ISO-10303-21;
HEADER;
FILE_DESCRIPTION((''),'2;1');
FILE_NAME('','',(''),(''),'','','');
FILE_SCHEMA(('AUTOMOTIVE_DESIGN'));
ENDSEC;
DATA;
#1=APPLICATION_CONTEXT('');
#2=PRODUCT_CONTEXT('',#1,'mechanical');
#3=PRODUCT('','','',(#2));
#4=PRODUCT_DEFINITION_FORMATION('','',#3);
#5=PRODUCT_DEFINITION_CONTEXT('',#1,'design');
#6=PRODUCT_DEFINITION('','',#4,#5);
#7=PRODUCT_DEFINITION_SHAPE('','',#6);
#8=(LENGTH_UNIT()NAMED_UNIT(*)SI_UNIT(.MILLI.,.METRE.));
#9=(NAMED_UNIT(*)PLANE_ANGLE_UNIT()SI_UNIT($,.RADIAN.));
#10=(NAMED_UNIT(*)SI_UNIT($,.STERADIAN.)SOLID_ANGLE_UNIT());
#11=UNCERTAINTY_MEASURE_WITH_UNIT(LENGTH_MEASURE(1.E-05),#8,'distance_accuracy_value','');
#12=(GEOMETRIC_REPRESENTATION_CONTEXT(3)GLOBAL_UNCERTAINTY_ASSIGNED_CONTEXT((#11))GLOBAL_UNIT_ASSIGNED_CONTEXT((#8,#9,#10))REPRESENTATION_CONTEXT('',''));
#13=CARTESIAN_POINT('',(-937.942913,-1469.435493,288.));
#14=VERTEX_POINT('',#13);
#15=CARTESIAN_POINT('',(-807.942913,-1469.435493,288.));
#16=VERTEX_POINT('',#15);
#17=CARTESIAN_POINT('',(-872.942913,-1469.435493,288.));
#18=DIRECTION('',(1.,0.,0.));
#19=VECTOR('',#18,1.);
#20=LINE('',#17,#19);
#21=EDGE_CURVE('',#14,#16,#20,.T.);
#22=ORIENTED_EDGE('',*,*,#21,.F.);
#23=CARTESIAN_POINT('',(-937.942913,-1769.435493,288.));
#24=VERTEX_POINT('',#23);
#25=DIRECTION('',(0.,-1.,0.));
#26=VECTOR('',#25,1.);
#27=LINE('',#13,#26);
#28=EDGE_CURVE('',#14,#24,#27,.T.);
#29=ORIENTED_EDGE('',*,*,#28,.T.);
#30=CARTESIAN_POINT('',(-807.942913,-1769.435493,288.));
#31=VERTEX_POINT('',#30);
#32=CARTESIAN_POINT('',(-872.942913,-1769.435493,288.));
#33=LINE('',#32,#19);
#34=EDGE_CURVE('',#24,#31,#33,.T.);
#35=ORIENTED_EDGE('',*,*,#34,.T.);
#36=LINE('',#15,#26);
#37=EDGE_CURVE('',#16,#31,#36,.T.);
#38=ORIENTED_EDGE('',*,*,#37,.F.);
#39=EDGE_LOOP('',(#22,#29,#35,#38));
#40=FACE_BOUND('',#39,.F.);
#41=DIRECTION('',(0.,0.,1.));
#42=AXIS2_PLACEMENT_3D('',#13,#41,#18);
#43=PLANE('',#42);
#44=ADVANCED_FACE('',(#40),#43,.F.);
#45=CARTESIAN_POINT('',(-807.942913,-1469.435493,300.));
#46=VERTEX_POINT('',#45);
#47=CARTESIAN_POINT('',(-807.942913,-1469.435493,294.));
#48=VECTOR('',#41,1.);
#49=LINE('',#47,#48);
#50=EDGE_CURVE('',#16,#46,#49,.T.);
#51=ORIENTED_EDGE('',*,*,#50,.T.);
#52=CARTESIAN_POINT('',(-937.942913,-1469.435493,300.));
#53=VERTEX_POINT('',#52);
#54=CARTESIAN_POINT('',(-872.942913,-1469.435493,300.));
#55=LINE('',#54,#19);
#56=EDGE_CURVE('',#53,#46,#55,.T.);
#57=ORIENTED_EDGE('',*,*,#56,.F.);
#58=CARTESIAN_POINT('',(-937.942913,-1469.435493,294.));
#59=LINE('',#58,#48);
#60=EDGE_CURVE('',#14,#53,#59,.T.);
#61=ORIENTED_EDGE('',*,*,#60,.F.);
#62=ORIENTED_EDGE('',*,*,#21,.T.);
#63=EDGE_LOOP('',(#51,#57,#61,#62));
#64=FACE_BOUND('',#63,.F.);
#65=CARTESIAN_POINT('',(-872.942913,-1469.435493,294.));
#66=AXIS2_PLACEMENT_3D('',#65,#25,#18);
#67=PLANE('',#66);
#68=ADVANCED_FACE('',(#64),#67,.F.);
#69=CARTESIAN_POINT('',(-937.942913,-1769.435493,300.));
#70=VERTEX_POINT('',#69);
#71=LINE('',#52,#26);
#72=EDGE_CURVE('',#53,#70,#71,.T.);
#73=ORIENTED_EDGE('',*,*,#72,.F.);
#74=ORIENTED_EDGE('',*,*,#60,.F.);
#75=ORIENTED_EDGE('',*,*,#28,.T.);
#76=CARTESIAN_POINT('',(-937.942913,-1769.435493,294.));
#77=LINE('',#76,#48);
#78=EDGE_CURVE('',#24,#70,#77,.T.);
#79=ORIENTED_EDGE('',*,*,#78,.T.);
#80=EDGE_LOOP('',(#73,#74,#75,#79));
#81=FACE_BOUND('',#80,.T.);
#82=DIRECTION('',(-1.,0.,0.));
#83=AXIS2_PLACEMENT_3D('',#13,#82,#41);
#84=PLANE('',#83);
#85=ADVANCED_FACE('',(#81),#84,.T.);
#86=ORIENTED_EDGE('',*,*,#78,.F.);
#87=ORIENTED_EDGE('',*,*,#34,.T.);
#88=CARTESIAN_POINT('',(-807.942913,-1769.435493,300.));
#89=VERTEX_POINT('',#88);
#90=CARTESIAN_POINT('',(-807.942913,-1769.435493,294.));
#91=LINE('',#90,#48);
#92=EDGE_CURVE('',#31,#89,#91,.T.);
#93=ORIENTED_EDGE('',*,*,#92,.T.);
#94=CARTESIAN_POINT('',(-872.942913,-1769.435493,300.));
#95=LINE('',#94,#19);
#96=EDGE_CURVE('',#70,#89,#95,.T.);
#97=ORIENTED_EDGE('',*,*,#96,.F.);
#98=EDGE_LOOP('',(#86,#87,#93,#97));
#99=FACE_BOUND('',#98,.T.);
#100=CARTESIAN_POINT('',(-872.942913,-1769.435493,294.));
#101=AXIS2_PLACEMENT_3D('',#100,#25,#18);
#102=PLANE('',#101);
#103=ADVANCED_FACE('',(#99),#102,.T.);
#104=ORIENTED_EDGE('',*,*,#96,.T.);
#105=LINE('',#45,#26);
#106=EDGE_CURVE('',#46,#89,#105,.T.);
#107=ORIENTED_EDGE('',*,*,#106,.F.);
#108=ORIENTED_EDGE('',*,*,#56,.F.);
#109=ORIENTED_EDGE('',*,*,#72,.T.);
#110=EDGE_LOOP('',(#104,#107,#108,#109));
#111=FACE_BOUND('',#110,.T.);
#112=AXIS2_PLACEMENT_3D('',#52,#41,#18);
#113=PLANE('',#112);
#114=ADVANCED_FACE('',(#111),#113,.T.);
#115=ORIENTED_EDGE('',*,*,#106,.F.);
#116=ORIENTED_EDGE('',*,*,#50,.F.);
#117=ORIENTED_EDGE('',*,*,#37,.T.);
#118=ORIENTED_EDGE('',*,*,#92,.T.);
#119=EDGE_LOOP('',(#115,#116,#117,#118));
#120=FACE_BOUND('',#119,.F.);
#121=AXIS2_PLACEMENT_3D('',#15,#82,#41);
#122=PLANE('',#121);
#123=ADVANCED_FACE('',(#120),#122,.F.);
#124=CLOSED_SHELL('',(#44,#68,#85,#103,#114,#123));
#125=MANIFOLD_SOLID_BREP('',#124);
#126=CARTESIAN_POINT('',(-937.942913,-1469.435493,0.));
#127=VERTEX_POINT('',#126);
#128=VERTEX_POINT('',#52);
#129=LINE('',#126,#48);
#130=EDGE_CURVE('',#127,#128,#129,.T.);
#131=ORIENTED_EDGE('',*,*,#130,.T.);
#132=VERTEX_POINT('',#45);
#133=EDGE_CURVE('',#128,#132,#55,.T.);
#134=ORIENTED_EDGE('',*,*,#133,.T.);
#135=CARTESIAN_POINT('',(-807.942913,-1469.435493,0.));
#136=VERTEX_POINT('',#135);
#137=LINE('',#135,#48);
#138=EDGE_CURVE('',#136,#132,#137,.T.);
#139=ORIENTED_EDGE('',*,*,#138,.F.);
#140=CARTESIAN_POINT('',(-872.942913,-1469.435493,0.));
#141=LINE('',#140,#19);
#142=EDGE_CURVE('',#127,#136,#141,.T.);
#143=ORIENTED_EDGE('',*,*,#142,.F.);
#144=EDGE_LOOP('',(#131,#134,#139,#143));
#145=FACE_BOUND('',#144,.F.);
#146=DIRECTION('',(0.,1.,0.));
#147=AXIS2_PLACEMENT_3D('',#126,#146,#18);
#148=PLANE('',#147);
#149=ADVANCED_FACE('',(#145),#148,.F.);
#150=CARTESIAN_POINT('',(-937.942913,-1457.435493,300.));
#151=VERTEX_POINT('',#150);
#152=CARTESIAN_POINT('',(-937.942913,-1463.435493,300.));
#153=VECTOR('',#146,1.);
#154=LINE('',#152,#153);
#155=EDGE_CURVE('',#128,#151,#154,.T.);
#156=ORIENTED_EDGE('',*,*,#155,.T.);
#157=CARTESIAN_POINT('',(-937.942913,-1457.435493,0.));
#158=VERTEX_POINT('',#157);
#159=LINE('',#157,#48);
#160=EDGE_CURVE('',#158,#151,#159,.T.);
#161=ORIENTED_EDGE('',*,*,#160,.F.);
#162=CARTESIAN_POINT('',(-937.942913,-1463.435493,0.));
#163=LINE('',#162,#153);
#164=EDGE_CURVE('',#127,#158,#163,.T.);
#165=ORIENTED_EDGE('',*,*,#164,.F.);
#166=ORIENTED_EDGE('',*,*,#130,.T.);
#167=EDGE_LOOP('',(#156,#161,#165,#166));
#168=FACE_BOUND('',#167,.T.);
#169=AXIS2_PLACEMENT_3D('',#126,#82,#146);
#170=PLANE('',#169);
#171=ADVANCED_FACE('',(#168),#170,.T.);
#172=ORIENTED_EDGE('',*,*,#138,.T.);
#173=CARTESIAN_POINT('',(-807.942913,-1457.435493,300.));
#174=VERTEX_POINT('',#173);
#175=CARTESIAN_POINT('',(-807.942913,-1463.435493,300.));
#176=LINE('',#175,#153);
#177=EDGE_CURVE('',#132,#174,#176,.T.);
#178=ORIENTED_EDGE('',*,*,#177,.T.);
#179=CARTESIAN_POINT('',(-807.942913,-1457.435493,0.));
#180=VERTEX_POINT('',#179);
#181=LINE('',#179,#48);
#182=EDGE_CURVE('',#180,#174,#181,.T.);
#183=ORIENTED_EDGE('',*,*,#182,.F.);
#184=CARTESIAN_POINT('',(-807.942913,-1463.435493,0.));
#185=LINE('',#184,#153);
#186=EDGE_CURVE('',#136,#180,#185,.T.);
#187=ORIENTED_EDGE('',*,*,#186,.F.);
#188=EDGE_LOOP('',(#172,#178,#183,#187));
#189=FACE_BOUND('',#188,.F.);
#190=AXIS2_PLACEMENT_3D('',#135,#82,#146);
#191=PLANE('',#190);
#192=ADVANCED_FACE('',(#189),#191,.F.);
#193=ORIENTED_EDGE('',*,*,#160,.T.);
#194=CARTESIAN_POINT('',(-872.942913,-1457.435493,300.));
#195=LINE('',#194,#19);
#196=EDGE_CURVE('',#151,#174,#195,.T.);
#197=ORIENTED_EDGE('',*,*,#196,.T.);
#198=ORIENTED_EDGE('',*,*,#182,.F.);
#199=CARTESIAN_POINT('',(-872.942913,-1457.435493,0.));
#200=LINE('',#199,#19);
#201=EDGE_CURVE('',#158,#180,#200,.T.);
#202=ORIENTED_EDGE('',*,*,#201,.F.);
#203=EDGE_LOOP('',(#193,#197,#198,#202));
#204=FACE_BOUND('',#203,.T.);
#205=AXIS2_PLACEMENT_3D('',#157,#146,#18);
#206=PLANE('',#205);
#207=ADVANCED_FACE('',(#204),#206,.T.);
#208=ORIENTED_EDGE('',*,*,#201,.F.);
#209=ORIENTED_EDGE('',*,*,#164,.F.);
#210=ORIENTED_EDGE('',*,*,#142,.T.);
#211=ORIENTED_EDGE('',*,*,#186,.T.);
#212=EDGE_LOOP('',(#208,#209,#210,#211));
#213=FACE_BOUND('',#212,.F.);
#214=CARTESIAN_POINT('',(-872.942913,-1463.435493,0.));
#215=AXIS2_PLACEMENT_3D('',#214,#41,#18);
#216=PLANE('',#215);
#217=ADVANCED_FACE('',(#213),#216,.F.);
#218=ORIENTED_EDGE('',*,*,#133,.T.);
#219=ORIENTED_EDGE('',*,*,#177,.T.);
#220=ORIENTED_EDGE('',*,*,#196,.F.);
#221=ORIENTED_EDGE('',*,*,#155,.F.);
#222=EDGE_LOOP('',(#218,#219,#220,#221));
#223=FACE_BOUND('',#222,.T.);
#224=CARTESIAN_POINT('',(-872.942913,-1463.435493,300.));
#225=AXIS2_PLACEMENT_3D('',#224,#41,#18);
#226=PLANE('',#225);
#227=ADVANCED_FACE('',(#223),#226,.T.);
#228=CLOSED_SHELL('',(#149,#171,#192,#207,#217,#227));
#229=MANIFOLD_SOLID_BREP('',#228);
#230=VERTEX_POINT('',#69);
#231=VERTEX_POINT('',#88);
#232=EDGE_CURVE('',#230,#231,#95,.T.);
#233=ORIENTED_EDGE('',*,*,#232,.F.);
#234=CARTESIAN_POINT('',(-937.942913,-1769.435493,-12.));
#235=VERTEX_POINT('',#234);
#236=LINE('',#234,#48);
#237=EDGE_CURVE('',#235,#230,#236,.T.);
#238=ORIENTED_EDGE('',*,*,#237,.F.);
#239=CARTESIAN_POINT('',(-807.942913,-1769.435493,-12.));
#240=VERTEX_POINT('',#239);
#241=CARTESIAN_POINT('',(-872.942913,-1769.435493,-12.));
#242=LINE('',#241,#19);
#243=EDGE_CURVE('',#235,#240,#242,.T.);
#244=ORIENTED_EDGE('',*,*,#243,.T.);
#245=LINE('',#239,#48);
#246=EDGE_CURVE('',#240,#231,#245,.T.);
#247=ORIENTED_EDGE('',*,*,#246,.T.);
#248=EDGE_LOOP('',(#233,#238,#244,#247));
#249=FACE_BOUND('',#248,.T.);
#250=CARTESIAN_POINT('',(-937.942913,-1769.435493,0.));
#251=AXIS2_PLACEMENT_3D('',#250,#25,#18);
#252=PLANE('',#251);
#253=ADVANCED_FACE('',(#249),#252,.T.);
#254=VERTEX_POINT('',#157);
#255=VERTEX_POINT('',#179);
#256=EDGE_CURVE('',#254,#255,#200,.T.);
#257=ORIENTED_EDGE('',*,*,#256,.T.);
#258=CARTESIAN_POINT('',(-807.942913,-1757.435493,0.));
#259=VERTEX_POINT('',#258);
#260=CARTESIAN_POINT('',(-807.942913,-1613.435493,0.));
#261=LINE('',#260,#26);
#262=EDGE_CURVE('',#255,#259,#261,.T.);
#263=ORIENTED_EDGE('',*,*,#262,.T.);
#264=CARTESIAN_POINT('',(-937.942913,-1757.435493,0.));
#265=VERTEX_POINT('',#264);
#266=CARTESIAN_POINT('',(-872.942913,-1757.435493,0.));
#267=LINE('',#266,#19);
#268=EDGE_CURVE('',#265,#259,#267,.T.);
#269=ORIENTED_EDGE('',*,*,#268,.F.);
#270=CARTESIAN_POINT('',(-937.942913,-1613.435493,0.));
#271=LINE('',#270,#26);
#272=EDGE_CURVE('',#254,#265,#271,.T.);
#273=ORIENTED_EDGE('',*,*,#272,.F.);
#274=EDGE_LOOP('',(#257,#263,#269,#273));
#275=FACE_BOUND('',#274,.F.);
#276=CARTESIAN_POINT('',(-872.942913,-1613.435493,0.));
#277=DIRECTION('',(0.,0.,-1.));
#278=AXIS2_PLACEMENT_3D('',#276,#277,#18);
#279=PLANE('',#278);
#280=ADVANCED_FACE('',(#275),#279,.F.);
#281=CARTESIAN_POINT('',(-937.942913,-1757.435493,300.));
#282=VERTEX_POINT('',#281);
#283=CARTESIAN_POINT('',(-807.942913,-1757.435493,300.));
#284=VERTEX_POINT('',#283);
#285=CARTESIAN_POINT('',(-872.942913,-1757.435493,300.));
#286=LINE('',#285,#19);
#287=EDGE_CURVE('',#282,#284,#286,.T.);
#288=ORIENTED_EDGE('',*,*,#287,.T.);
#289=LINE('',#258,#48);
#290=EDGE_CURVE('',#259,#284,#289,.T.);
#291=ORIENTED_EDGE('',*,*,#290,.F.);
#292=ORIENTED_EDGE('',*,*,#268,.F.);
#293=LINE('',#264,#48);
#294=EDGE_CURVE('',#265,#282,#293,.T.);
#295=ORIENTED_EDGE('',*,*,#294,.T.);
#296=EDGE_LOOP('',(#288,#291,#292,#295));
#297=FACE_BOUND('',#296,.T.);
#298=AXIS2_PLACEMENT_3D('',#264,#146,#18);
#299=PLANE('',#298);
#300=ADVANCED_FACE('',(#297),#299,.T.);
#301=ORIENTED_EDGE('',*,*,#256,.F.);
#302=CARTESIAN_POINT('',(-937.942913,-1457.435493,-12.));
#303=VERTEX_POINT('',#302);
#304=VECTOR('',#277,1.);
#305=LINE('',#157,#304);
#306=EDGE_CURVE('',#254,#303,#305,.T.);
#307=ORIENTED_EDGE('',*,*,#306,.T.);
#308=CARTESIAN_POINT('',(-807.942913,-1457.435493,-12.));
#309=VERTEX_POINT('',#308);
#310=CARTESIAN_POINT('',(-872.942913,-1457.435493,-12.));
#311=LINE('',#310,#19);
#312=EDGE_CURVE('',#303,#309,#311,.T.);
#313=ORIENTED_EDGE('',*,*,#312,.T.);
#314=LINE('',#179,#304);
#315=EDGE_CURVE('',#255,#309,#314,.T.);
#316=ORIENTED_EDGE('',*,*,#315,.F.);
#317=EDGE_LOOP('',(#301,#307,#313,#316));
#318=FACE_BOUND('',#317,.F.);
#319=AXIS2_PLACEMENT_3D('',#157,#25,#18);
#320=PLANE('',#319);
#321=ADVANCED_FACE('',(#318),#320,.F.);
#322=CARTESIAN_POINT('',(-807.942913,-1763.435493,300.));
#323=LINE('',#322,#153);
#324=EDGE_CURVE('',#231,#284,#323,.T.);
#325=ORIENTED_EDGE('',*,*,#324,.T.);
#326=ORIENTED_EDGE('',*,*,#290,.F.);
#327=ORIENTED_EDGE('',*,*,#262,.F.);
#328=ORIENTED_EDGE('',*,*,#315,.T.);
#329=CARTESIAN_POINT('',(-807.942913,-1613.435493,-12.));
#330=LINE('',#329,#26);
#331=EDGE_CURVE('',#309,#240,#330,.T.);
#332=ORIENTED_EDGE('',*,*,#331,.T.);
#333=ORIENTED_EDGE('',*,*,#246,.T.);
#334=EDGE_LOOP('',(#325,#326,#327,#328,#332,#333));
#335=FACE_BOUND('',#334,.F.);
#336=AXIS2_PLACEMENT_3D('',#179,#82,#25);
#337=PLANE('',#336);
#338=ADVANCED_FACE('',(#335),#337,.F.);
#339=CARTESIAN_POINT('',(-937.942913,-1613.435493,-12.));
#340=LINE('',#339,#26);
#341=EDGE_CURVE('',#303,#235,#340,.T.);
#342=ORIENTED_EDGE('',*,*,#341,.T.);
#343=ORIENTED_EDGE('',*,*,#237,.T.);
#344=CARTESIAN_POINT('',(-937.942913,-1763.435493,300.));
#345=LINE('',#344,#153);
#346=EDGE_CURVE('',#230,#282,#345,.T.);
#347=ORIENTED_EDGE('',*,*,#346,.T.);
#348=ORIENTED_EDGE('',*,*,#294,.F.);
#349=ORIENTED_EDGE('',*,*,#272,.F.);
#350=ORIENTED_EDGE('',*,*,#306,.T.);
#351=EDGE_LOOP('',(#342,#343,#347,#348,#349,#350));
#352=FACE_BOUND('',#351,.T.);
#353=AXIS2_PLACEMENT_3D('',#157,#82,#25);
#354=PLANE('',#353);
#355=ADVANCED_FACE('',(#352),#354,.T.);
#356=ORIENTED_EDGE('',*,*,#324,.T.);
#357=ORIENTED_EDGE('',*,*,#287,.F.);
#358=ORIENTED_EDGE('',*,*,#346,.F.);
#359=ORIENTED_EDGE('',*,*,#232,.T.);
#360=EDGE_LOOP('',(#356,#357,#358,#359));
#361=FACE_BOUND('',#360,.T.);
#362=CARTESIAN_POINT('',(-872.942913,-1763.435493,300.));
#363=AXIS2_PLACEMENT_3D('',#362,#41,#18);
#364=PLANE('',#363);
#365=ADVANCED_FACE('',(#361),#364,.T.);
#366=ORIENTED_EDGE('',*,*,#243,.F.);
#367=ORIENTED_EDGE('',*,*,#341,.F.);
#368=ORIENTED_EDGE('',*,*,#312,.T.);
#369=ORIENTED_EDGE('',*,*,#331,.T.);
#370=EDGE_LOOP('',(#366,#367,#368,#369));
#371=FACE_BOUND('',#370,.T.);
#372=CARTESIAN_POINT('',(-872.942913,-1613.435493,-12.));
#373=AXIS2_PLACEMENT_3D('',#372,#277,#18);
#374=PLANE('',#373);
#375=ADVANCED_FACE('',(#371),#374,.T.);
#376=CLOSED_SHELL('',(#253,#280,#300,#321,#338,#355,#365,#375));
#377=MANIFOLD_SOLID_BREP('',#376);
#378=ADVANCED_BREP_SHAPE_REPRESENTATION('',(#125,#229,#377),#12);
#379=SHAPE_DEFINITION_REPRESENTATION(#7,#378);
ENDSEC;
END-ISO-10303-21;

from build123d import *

# Parameters (mm, degrees)
F0_W     = 130
F0_H     = 12
F1_DEPTH = 300
F2_W     = 130
F2_H     = 12
F3_DEPTH = 300
F4_W     = 130
F4_H     = 312
F5_DEPTH = 12


with BuildPart() as f1:
    # F0 (on Top) → F1 (new body)
    with BuildSketch(Plane.XY):
        with Locations((-872.942913402, -1763.4354934643)):
            Rectangle(F0_W, F0_H)
    extrude(amount=F1_DEPTH)

    # F4 (on face) → F5 (join)
    with BuildSketch(Plane(origin=(0, 0, 0), x_dir=(1, 0, 0), z_dir=(0, 0, -1))):
        with Locations((-872.942913402, 1613.4354934643)):
            Rectangle(F4_W, F4_H)
    extrude(amount=F5_DEPTH)


with BuildPart() as f1b:
    # F0 (on Top) → F1, piece 2 (new body)
    with BuildSketch(Plane.XY):
        with Locations((-872.942913402, -1463.4354934643)):
            Rectangle(F0_W, F0_H)
    extrude(amount=F1_DEPTH)


with BuildPart() as f3:
    # F2 (on face) → F3 (new body)
    with BuildSketch(Plane.XZ.offset(1469.4354934643)):
        with Locations((-872.942913402, 294)):
            Rectangle(F2_W, F2_H)
    extrude(amount=F3_DEPTH)


solid = Compound([f1.part, f1b.part, f3.part])
